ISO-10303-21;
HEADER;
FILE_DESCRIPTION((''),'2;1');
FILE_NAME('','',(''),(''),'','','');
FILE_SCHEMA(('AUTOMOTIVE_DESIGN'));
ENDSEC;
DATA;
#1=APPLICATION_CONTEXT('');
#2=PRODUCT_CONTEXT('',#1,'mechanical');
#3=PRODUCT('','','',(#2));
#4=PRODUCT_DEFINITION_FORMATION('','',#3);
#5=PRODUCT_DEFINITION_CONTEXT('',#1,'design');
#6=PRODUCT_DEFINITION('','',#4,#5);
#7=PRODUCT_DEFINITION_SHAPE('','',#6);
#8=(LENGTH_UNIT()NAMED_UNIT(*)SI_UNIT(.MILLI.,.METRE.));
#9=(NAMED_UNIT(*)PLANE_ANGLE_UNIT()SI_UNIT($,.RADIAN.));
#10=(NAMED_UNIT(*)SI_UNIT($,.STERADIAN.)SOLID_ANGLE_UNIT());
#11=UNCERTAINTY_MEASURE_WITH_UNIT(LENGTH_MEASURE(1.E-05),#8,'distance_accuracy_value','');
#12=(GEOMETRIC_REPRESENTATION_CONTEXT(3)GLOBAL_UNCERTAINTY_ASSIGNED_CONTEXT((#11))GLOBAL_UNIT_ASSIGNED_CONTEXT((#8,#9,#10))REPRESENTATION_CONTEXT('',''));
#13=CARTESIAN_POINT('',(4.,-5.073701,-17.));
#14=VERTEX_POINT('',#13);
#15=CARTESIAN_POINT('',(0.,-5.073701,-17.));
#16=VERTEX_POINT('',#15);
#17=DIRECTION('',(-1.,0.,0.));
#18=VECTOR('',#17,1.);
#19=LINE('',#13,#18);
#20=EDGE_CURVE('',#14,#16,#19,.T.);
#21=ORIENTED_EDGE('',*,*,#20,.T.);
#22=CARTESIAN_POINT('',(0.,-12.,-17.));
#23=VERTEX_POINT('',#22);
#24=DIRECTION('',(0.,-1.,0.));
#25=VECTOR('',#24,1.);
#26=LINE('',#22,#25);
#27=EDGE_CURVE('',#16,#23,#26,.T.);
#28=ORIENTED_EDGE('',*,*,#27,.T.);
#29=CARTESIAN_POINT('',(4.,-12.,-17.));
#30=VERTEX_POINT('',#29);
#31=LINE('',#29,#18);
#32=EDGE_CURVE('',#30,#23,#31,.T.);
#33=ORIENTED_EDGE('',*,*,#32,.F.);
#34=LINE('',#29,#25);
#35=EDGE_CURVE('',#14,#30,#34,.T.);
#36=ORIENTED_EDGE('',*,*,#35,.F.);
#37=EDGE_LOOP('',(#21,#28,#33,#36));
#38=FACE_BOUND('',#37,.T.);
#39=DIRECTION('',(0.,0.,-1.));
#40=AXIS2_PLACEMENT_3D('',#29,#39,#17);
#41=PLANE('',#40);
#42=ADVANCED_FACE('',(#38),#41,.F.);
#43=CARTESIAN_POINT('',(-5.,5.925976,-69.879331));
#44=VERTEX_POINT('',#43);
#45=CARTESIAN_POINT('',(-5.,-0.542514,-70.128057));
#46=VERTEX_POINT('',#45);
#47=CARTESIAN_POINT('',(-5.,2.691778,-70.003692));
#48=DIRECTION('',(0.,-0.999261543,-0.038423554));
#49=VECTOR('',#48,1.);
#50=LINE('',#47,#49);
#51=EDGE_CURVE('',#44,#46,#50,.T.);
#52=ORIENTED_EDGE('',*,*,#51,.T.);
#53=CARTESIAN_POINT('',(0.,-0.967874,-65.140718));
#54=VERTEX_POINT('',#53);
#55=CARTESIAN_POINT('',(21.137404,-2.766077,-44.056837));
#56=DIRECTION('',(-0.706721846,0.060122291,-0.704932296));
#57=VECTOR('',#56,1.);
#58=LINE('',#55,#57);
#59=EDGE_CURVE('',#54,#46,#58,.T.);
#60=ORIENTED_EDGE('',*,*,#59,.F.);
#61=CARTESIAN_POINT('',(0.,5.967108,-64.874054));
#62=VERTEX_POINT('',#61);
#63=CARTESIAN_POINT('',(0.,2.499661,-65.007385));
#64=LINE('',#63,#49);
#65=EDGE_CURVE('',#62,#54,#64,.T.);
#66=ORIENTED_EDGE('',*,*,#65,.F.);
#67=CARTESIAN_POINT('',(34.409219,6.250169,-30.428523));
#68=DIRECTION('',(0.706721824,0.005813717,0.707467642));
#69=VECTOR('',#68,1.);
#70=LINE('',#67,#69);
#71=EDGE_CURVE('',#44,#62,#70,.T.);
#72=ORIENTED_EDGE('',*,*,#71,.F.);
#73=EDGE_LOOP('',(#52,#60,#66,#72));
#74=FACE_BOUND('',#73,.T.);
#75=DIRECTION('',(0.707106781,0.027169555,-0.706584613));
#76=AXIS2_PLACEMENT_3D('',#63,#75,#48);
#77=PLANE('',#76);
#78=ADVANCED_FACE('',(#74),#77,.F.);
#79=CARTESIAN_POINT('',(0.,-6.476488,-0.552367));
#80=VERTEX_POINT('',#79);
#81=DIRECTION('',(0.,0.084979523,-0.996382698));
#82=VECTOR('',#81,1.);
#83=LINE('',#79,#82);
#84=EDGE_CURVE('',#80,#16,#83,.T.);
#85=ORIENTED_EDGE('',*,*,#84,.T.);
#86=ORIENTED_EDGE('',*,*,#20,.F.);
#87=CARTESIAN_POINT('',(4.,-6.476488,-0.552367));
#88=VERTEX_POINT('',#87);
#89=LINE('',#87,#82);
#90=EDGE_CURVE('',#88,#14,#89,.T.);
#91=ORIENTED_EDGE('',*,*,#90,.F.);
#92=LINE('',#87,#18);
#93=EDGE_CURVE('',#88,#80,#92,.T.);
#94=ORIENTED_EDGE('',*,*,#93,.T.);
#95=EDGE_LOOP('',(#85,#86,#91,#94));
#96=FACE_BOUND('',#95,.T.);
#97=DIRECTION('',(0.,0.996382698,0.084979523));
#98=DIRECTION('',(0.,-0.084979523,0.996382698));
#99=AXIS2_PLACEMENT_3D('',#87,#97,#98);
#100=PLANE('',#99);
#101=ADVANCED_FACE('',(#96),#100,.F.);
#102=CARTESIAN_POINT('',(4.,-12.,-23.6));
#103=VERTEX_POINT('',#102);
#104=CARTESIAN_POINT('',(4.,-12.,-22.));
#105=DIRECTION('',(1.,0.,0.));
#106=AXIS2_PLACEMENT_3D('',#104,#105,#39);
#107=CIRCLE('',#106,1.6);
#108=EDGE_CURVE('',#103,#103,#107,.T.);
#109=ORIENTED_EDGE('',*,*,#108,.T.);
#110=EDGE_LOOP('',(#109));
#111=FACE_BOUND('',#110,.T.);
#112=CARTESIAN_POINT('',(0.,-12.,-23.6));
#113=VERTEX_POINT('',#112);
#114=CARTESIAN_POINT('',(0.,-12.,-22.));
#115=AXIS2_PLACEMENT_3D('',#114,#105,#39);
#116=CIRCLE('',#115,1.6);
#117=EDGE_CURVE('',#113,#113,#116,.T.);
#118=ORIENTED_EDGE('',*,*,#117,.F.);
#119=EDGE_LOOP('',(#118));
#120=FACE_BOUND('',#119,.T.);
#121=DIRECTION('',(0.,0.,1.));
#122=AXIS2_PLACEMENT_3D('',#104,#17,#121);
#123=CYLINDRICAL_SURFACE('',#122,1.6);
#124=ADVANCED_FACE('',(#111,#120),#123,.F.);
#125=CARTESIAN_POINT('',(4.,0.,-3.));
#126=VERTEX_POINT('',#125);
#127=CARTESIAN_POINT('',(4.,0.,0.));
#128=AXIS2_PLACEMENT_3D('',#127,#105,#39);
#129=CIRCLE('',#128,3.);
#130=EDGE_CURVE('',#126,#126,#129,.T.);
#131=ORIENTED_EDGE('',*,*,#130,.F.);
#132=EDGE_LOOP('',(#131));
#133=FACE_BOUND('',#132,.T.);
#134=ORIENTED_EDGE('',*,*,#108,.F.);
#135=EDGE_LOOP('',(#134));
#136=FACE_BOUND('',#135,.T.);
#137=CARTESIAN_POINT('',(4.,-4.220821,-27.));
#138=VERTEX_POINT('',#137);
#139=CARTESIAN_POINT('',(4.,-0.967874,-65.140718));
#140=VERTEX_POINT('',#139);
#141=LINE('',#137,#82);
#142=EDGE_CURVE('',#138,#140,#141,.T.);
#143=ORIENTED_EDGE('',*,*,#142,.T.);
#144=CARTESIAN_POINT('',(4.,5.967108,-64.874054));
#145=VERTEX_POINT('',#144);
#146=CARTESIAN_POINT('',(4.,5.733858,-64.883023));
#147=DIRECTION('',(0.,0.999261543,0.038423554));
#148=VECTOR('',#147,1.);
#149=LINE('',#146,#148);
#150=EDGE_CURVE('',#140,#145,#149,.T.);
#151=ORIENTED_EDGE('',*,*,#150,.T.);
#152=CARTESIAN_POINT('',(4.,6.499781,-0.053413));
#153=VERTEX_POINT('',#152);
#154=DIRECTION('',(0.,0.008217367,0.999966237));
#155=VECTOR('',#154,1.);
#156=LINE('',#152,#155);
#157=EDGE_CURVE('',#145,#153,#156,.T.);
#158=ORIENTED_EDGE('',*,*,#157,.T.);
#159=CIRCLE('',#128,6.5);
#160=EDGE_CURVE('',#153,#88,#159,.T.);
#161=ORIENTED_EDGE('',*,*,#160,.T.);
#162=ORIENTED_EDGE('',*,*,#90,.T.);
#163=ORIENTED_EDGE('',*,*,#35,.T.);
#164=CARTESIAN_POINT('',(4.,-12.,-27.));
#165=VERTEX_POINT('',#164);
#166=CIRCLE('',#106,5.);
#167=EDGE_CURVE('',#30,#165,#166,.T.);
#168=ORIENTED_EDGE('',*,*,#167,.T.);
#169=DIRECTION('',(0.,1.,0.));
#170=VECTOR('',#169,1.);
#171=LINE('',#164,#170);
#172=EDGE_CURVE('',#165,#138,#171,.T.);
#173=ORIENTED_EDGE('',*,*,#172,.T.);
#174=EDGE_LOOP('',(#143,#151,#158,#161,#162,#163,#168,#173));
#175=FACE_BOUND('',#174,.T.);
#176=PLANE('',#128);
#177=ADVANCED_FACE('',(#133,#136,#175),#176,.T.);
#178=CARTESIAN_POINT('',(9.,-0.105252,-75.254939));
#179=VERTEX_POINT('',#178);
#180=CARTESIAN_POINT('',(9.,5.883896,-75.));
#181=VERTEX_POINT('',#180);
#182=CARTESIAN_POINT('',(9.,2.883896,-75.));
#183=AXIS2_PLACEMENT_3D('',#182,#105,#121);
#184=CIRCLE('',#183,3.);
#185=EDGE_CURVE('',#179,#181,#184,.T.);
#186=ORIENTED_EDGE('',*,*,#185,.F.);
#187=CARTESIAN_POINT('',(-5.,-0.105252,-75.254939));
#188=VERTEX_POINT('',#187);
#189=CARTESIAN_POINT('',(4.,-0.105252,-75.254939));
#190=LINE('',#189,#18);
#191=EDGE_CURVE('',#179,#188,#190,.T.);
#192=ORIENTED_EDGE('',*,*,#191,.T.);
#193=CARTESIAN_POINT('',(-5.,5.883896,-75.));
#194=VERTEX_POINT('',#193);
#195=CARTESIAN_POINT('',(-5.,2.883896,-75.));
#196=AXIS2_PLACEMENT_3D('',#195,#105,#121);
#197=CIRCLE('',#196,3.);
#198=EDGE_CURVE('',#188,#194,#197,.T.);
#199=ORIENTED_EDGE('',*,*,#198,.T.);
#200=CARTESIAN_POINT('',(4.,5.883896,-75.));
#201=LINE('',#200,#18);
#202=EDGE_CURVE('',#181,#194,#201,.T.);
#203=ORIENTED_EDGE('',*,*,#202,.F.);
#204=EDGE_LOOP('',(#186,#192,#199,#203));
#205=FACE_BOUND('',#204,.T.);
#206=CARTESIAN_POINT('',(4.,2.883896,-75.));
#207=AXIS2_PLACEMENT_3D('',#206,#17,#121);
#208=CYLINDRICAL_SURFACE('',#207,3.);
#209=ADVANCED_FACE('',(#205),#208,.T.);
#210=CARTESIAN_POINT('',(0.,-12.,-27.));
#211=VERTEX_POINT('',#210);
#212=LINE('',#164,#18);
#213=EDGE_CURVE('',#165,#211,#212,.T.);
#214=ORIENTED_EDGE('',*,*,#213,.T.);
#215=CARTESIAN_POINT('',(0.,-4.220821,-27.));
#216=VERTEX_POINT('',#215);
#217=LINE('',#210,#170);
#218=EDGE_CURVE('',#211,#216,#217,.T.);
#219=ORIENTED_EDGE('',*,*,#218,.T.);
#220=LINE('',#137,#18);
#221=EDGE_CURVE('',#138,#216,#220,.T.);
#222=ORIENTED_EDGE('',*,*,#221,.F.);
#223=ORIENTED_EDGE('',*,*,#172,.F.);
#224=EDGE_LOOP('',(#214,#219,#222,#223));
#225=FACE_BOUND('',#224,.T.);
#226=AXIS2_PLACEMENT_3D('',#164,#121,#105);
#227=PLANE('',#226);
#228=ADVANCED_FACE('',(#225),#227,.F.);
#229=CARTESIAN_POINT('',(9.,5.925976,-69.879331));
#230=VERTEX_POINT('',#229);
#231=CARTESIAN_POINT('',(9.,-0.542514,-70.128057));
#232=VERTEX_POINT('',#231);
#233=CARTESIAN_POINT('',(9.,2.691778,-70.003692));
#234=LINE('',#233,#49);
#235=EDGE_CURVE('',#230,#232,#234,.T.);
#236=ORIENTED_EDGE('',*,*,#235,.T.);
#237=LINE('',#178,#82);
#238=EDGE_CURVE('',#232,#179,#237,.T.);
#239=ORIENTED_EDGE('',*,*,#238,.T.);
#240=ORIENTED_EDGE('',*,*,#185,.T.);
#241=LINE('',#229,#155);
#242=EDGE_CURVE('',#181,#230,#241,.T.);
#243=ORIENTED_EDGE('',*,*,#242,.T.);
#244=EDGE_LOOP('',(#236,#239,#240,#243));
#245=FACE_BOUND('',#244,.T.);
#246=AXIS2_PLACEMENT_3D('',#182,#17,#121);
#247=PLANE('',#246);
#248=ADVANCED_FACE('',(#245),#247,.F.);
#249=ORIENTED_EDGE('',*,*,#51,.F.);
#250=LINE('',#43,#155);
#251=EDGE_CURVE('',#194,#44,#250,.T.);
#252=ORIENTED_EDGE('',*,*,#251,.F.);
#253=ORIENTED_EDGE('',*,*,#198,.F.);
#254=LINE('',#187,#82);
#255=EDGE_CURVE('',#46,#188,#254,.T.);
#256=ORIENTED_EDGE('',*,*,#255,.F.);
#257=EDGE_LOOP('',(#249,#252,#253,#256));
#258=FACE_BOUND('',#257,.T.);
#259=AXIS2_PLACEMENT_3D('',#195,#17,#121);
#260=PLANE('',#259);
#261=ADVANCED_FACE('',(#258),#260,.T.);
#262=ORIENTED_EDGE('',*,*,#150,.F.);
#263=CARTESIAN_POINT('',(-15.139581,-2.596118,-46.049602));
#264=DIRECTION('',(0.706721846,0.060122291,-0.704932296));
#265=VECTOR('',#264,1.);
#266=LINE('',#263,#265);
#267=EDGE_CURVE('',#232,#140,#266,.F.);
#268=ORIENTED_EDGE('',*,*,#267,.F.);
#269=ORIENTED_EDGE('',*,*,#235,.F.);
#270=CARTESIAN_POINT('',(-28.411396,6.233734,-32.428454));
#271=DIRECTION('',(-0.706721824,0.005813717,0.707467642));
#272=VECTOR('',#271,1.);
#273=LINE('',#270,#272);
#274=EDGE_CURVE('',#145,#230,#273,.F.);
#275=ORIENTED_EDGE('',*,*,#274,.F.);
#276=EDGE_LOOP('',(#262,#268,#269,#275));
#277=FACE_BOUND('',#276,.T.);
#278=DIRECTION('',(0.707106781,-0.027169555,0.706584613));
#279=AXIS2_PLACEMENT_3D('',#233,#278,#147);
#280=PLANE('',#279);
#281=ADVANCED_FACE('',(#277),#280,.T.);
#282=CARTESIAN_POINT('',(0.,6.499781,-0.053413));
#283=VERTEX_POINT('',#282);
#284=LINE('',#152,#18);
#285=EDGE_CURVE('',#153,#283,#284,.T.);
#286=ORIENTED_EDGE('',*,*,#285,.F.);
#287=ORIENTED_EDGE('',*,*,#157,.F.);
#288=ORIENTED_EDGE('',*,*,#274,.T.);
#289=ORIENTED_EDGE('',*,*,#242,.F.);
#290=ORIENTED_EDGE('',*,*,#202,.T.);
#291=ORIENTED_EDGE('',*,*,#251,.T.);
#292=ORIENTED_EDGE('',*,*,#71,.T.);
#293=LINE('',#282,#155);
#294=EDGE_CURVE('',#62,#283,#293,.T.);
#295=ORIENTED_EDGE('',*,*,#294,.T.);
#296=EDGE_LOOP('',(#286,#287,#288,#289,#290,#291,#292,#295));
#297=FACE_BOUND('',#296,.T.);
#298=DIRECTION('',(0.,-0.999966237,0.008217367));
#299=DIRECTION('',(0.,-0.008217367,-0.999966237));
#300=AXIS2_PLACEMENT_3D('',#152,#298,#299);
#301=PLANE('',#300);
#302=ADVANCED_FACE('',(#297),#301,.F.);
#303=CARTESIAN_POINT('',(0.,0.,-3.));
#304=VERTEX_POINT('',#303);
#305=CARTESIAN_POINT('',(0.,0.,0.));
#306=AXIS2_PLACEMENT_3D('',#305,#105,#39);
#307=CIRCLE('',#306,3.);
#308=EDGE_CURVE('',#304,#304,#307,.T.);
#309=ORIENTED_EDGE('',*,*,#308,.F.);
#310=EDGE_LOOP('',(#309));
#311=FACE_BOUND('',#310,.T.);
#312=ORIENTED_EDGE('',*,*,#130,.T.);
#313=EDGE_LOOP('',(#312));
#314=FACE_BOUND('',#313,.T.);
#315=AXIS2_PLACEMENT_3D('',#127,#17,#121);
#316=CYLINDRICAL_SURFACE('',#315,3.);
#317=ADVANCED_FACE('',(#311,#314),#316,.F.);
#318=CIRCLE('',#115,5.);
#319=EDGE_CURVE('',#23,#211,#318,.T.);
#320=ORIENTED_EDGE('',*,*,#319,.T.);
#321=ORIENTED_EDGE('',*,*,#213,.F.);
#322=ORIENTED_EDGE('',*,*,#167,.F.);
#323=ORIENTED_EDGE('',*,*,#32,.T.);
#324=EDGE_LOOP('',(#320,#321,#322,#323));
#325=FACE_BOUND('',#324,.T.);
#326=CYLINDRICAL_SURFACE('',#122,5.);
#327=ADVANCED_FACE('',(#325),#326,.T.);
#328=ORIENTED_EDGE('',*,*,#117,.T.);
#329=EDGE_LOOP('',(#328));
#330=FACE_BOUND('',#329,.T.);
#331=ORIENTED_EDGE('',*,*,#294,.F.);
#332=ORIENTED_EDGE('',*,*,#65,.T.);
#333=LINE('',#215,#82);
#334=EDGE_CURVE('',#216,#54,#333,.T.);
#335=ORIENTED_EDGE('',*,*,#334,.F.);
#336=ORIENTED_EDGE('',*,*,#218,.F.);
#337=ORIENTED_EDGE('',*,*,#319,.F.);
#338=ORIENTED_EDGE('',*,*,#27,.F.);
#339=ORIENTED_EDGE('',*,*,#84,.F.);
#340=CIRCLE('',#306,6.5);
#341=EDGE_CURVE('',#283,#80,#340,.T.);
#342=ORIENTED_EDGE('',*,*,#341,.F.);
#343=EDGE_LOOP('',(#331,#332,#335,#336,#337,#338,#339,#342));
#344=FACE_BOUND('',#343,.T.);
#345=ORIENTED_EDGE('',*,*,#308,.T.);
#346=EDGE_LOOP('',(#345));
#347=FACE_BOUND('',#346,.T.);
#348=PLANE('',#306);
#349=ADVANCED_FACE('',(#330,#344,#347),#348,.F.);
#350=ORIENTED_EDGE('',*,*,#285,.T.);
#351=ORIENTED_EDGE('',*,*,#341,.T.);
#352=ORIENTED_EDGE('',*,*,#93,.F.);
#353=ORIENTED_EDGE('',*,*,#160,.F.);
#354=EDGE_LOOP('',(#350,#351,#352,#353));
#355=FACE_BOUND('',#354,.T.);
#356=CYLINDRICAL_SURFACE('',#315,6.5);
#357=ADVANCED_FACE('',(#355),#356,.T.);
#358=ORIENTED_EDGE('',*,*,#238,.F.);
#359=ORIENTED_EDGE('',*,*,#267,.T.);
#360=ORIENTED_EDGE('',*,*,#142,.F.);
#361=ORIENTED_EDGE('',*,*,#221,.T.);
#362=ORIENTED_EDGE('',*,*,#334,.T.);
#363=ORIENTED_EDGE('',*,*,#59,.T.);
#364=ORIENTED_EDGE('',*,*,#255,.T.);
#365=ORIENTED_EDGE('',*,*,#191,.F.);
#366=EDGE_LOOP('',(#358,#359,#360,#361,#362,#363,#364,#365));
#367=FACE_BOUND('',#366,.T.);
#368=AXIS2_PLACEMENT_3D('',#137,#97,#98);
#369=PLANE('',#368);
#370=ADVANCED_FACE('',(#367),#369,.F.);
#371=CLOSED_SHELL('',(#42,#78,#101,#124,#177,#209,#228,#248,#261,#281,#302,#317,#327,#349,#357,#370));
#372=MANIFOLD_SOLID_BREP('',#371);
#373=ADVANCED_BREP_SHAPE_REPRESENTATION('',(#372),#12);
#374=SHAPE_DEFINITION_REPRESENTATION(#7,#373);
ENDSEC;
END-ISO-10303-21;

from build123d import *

# Parameters (mm, degrees)
SKETCH1_R                = 1.6
SKETCH1_R_2              = 3
BOSS_EXTRUDE1_DEPTH      = 4
BOSS_EXTRUDE2_DEPTH      = 5
BOSS_EXTRUDE2_DEPTH_BACK = 9
CHAMFER1_SIZE            = 5


with BuildPart() as part:
    # Sketch1 → Boss-Extrude1 (new body)
    with BuildSketch(Plane(origin=(0, 0, 0), x_dir=(0, 0, -1), z_dir=(1, 0, 0))):
        with BuildLine():
            Line((0.053412883, 6.49978054), (75, 5.883896162))
            ThreePointArc((75, 5.883896162), (77.997285796, 3.011480877), (75.25493857, -0.105251932))
            Line((75.25493857, -0.105251932), (27, -4.220820858))
            Line((27, -4.220820858), (27, -12))
            ThreePointArc((27, -12), (22, -17), (17, -12))
            Line((17, -12), (17, -5.073701216))
            Line((17, -5.073701216), (0.552366901, -6.476487536))
            ThreePointArc((0.552366901, -6.476487536), (-6.495200196, -0.249748712), (0.053412883, 6.49978054))
        make_face()
        with Locations((22, -12)):
            Circle(SKETCH1_R, mode=Mode.SUBTRACT)
        Circle(SKETCH1_R_2, mode=Mode.SUBTRACT)
    extrude(amount=BOSS_EXTRUDE1_DEPTH)

    # Sketch2 → Boss-Extrude2 (add, two sides: drawn at the far end of the back side and taken through both)
    with BuildSketch(Plane(origin=(4, 0, 0), x_dir=(0, 0, -1), z_dir=(1, 0, 0)).offset(-BOSS_EXTRUDE2_DEPTH_BACK)):
        with BuildLine():
            Line((70.003692287, 2.691778393), (70.128057116, -0.54251358))
            Line((70.128057116, -0.54251358), (75.25493857, -0.105251932))
            ThreePointArc((75.25493857, -0.105251932), (77.997285796, 3.011480877), (75, 5.883896162))
            Line((75, 5.883896162), (69.879331086, 5.925975997))
            Line((69.879331086, 5.925975997), (70.003692287, 2.691778393))
        make_face()
    extrude(amount=BOSS_EXTRUDE2_DEPTH + BOSS_EXTRUDE2_DEPTH_BACK)

    # Chamfer1
    chamfer1_edges = [part.edges().sort_by_distance(p)[0] for p in [
        (0, 2.691731208, -70.003694101),
        (4, 2.691731208, -70.003694101),
    ]]
    chamfer(chamfer1_edges, length=CHAMFER1_SIZE - 0.0001)  # a hair under: the kernel refuses the full size


solid = part.part
